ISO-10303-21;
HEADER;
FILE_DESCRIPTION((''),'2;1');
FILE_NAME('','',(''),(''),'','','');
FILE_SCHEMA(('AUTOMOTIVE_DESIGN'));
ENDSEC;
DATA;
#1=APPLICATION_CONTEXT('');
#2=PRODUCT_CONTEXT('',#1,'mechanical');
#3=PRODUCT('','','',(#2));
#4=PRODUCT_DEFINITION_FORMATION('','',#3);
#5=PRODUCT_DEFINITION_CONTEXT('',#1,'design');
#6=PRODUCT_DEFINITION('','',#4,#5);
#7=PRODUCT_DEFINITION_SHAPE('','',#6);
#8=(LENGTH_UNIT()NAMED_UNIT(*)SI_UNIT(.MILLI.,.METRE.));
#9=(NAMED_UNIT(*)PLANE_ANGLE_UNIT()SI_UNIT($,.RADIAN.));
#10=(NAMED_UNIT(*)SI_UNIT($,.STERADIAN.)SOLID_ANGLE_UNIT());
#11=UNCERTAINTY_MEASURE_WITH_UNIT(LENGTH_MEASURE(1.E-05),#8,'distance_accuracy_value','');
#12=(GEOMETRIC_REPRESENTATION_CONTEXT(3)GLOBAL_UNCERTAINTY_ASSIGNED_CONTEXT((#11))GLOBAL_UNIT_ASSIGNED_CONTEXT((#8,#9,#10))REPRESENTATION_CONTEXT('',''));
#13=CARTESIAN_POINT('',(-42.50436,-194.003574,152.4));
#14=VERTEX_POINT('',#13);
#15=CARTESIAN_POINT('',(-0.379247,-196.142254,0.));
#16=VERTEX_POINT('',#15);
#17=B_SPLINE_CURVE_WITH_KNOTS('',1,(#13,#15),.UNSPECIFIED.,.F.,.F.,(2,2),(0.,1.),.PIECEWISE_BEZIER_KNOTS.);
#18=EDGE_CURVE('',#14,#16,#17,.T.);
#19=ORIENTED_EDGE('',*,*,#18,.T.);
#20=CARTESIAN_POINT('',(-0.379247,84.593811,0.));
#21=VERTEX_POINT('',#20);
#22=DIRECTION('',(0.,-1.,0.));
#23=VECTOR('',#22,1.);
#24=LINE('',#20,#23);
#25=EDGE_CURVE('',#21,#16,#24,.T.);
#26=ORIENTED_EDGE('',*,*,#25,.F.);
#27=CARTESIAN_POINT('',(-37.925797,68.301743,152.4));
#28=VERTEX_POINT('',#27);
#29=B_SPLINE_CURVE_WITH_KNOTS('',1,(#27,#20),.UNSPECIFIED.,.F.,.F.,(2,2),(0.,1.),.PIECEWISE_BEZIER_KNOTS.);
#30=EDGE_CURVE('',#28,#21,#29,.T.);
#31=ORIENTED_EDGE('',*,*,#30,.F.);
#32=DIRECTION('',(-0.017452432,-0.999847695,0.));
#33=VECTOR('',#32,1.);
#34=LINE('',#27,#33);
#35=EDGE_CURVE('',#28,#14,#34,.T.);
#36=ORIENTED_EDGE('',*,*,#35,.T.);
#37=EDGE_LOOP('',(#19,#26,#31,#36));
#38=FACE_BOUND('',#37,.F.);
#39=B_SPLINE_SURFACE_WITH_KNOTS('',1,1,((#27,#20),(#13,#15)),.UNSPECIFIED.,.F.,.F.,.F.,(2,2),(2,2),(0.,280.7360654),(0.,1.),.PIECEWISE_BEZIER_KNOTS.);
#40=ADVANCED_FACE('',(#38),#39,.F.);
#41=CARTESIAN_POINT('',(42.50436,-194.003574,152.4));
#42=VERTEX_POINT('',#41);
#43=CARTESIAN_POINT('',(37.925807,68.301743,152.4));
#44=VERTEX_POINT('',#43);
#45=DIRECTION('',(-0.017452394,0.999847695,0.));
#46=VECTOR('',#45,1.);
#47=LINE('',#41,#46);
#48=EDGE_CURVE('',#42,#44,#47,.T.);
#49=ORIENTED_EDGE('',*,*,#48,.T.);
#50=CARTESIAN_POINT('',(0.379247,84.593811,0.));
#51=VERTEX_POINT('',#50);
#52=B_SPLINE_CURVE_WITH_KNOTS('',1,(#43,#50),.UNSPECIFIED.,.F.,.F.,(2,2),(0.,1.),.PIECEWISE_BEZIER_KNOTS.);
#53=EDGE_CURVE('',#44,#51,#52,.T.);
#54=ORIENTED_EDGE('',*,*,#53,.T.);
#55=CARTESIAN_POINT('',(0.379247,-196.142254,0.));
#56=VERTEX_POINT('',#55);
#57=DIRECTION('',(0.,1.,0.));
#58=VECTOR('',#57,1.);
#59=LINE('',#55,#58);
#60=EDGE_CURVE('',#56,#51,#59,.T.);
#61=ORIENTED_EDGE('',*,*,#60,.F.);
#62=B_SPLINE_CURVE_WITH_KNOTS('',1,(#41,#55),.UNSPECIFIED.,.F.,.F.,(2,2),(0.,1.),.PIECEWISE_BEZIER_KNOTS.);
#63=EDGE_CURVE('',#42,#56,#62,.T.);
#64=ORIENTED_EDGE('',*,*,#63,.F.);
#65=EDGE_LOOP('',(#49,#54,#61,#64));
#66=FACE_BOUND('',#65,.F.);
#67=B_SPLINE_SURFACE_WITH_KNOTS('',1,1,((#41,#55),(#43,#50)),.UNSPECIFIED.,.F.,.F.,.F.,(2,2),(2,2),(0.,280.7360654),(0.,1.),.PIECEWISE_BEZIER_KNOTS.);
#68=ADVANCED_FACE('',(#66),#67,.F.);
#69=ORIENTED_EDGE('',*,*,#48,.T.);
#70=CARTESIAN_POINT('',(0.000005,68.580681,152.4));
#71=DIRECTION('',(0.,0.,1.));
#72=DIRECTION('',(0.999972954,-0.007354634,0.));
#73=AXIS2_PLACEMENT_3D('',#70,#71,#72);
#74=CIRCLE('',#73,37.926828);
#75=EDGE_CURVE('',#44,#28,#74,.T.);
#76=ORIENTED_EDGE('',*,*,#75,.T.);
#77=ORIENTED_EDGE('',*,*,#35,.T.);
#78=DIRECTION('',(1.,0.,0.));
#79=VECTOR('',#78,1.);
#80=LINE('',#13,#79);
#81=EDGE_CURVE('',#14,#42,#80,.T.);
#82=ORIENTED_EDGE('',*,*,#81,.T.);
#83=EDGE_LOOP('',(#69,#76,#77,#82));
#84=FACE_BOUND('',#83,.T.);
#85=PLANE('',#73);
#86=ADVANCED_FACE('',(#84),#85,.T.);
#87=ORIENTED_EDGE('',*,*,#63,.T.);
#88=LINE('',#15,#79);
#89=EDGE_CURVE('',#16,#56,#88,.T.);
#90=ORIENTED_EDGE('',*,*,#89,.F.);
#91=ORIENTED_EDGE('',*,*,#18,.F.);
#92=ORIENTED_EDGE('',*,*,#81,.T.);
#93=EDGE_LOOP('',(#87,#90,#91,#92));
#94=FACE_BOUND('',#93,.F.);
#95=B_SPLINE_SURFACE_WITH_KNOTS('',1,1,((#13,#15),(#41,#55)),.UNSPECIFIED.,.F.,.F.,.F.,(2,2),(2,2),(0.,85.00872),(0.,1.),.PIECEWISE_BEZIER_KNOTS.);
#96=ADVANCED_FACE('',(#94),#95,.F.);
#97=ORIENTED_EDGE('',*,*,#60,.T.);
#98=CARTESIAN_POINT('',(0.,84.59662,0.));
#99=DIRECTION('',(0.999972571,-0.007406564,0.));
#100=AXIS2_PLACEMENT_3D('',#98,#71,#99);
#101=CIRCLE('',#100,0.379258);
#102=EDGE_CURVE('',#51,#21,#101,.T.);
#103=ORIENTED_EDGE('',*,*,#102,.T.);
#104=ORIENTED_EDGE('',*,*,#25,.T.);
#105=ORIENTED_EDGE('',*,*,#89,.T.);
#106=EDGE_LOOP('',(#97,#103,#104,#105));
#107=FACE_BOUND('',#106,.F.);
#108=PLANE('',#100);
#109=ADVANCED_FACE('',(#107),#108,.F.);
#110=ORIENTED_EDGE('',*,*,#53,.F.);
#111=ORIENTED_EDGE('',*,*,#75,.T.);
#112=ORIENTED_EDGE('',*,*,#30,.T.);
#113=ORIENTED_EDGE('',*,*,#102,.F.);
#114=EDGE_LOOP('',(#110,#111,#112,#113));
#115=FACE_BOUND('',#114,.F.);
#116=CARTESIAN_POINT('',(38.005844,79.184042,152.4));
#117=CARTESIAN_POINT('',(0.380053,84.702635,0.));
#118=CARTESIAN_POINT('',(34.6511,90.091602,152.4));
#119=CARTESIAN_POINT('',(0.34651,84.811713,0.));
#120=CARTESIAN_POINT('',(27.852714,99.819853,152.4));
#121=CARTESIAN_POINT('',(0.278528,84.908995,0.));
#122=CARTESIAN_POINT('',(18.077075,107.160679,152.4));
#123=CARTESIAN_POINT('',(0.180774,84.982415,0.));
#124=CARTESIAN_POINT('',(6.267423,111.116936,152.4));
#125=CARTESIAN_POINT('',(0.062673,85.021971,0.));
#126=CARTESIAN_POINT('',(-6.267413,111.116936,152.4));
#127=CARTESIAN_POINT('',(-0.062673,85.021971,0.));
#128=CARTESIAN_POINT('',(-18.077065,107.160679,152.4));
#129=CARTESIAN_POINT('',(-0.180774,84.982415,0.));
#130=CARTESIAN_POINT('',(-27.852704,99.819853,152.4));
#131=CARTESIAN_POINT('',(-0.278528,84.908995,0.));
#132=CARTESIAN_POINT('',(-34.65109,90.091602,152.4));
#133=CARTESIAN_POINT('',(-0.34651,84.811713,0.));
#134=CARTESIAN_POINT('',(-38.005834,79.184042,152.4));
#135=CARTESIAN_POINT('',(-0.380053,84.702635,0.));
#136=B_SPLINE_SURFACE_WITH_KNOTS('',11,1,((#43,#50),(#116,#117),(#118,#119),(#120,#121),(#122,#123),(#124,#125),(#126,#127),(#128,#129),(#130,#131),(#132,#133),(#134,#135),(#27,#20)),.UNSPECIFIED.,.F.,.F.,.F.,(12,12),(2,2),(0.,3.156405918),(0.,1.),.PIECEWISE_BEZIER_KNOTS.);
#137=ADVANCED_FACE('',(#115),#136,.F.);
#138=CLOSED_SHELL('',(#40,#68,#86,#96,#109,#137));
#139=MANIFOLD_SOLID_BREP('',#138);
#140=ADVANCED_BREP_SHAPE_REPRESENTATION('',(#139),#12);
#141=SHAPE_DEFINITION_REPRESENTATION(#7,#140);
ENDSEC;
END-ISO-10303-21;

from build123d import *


# Not quite as in the source:
# - ends of sketch curves that miss each other by under 0.0002 mm in the source are joined


with BuildPart() as f3:
    # F1 (on offset) → F3 section 0
    with BuildSketch(Plane.XY.offset(152.4)):
        with BuildLine():
            Line((-42.50436, -194.0035744), (42.50436, -194.0035744))
            Line((42.50436, -194.0035744), (37.9258068, 68.301743))
            ThreePointArc((37.9258068, 68.301743), (0, 106.5075086), (-37.9257970075, 68.301743072))
            Line((-37.9257970075, 68.301743072), (-42.50436, -194.0035744))
        make_face()
    # F2 (on Top) → F3 section 1
    with BuildSketch(Plane.XY):
        with BuildLine():
            Line((-0.3792474, 84.593811), (-0.3792474, -196.1422544))
            Line((-0.3792474, -196.1422544), (0.3792474, -196.1422544))
            Line((0.3792474, -196.1422544), (0.3792474, 84.593811))
            ThreePointArc((0.3792474, 84.593811), (0, 84.9758778), (-0.3792474, 84.593811))
        make_face()
    loft()


solid = f3.part
